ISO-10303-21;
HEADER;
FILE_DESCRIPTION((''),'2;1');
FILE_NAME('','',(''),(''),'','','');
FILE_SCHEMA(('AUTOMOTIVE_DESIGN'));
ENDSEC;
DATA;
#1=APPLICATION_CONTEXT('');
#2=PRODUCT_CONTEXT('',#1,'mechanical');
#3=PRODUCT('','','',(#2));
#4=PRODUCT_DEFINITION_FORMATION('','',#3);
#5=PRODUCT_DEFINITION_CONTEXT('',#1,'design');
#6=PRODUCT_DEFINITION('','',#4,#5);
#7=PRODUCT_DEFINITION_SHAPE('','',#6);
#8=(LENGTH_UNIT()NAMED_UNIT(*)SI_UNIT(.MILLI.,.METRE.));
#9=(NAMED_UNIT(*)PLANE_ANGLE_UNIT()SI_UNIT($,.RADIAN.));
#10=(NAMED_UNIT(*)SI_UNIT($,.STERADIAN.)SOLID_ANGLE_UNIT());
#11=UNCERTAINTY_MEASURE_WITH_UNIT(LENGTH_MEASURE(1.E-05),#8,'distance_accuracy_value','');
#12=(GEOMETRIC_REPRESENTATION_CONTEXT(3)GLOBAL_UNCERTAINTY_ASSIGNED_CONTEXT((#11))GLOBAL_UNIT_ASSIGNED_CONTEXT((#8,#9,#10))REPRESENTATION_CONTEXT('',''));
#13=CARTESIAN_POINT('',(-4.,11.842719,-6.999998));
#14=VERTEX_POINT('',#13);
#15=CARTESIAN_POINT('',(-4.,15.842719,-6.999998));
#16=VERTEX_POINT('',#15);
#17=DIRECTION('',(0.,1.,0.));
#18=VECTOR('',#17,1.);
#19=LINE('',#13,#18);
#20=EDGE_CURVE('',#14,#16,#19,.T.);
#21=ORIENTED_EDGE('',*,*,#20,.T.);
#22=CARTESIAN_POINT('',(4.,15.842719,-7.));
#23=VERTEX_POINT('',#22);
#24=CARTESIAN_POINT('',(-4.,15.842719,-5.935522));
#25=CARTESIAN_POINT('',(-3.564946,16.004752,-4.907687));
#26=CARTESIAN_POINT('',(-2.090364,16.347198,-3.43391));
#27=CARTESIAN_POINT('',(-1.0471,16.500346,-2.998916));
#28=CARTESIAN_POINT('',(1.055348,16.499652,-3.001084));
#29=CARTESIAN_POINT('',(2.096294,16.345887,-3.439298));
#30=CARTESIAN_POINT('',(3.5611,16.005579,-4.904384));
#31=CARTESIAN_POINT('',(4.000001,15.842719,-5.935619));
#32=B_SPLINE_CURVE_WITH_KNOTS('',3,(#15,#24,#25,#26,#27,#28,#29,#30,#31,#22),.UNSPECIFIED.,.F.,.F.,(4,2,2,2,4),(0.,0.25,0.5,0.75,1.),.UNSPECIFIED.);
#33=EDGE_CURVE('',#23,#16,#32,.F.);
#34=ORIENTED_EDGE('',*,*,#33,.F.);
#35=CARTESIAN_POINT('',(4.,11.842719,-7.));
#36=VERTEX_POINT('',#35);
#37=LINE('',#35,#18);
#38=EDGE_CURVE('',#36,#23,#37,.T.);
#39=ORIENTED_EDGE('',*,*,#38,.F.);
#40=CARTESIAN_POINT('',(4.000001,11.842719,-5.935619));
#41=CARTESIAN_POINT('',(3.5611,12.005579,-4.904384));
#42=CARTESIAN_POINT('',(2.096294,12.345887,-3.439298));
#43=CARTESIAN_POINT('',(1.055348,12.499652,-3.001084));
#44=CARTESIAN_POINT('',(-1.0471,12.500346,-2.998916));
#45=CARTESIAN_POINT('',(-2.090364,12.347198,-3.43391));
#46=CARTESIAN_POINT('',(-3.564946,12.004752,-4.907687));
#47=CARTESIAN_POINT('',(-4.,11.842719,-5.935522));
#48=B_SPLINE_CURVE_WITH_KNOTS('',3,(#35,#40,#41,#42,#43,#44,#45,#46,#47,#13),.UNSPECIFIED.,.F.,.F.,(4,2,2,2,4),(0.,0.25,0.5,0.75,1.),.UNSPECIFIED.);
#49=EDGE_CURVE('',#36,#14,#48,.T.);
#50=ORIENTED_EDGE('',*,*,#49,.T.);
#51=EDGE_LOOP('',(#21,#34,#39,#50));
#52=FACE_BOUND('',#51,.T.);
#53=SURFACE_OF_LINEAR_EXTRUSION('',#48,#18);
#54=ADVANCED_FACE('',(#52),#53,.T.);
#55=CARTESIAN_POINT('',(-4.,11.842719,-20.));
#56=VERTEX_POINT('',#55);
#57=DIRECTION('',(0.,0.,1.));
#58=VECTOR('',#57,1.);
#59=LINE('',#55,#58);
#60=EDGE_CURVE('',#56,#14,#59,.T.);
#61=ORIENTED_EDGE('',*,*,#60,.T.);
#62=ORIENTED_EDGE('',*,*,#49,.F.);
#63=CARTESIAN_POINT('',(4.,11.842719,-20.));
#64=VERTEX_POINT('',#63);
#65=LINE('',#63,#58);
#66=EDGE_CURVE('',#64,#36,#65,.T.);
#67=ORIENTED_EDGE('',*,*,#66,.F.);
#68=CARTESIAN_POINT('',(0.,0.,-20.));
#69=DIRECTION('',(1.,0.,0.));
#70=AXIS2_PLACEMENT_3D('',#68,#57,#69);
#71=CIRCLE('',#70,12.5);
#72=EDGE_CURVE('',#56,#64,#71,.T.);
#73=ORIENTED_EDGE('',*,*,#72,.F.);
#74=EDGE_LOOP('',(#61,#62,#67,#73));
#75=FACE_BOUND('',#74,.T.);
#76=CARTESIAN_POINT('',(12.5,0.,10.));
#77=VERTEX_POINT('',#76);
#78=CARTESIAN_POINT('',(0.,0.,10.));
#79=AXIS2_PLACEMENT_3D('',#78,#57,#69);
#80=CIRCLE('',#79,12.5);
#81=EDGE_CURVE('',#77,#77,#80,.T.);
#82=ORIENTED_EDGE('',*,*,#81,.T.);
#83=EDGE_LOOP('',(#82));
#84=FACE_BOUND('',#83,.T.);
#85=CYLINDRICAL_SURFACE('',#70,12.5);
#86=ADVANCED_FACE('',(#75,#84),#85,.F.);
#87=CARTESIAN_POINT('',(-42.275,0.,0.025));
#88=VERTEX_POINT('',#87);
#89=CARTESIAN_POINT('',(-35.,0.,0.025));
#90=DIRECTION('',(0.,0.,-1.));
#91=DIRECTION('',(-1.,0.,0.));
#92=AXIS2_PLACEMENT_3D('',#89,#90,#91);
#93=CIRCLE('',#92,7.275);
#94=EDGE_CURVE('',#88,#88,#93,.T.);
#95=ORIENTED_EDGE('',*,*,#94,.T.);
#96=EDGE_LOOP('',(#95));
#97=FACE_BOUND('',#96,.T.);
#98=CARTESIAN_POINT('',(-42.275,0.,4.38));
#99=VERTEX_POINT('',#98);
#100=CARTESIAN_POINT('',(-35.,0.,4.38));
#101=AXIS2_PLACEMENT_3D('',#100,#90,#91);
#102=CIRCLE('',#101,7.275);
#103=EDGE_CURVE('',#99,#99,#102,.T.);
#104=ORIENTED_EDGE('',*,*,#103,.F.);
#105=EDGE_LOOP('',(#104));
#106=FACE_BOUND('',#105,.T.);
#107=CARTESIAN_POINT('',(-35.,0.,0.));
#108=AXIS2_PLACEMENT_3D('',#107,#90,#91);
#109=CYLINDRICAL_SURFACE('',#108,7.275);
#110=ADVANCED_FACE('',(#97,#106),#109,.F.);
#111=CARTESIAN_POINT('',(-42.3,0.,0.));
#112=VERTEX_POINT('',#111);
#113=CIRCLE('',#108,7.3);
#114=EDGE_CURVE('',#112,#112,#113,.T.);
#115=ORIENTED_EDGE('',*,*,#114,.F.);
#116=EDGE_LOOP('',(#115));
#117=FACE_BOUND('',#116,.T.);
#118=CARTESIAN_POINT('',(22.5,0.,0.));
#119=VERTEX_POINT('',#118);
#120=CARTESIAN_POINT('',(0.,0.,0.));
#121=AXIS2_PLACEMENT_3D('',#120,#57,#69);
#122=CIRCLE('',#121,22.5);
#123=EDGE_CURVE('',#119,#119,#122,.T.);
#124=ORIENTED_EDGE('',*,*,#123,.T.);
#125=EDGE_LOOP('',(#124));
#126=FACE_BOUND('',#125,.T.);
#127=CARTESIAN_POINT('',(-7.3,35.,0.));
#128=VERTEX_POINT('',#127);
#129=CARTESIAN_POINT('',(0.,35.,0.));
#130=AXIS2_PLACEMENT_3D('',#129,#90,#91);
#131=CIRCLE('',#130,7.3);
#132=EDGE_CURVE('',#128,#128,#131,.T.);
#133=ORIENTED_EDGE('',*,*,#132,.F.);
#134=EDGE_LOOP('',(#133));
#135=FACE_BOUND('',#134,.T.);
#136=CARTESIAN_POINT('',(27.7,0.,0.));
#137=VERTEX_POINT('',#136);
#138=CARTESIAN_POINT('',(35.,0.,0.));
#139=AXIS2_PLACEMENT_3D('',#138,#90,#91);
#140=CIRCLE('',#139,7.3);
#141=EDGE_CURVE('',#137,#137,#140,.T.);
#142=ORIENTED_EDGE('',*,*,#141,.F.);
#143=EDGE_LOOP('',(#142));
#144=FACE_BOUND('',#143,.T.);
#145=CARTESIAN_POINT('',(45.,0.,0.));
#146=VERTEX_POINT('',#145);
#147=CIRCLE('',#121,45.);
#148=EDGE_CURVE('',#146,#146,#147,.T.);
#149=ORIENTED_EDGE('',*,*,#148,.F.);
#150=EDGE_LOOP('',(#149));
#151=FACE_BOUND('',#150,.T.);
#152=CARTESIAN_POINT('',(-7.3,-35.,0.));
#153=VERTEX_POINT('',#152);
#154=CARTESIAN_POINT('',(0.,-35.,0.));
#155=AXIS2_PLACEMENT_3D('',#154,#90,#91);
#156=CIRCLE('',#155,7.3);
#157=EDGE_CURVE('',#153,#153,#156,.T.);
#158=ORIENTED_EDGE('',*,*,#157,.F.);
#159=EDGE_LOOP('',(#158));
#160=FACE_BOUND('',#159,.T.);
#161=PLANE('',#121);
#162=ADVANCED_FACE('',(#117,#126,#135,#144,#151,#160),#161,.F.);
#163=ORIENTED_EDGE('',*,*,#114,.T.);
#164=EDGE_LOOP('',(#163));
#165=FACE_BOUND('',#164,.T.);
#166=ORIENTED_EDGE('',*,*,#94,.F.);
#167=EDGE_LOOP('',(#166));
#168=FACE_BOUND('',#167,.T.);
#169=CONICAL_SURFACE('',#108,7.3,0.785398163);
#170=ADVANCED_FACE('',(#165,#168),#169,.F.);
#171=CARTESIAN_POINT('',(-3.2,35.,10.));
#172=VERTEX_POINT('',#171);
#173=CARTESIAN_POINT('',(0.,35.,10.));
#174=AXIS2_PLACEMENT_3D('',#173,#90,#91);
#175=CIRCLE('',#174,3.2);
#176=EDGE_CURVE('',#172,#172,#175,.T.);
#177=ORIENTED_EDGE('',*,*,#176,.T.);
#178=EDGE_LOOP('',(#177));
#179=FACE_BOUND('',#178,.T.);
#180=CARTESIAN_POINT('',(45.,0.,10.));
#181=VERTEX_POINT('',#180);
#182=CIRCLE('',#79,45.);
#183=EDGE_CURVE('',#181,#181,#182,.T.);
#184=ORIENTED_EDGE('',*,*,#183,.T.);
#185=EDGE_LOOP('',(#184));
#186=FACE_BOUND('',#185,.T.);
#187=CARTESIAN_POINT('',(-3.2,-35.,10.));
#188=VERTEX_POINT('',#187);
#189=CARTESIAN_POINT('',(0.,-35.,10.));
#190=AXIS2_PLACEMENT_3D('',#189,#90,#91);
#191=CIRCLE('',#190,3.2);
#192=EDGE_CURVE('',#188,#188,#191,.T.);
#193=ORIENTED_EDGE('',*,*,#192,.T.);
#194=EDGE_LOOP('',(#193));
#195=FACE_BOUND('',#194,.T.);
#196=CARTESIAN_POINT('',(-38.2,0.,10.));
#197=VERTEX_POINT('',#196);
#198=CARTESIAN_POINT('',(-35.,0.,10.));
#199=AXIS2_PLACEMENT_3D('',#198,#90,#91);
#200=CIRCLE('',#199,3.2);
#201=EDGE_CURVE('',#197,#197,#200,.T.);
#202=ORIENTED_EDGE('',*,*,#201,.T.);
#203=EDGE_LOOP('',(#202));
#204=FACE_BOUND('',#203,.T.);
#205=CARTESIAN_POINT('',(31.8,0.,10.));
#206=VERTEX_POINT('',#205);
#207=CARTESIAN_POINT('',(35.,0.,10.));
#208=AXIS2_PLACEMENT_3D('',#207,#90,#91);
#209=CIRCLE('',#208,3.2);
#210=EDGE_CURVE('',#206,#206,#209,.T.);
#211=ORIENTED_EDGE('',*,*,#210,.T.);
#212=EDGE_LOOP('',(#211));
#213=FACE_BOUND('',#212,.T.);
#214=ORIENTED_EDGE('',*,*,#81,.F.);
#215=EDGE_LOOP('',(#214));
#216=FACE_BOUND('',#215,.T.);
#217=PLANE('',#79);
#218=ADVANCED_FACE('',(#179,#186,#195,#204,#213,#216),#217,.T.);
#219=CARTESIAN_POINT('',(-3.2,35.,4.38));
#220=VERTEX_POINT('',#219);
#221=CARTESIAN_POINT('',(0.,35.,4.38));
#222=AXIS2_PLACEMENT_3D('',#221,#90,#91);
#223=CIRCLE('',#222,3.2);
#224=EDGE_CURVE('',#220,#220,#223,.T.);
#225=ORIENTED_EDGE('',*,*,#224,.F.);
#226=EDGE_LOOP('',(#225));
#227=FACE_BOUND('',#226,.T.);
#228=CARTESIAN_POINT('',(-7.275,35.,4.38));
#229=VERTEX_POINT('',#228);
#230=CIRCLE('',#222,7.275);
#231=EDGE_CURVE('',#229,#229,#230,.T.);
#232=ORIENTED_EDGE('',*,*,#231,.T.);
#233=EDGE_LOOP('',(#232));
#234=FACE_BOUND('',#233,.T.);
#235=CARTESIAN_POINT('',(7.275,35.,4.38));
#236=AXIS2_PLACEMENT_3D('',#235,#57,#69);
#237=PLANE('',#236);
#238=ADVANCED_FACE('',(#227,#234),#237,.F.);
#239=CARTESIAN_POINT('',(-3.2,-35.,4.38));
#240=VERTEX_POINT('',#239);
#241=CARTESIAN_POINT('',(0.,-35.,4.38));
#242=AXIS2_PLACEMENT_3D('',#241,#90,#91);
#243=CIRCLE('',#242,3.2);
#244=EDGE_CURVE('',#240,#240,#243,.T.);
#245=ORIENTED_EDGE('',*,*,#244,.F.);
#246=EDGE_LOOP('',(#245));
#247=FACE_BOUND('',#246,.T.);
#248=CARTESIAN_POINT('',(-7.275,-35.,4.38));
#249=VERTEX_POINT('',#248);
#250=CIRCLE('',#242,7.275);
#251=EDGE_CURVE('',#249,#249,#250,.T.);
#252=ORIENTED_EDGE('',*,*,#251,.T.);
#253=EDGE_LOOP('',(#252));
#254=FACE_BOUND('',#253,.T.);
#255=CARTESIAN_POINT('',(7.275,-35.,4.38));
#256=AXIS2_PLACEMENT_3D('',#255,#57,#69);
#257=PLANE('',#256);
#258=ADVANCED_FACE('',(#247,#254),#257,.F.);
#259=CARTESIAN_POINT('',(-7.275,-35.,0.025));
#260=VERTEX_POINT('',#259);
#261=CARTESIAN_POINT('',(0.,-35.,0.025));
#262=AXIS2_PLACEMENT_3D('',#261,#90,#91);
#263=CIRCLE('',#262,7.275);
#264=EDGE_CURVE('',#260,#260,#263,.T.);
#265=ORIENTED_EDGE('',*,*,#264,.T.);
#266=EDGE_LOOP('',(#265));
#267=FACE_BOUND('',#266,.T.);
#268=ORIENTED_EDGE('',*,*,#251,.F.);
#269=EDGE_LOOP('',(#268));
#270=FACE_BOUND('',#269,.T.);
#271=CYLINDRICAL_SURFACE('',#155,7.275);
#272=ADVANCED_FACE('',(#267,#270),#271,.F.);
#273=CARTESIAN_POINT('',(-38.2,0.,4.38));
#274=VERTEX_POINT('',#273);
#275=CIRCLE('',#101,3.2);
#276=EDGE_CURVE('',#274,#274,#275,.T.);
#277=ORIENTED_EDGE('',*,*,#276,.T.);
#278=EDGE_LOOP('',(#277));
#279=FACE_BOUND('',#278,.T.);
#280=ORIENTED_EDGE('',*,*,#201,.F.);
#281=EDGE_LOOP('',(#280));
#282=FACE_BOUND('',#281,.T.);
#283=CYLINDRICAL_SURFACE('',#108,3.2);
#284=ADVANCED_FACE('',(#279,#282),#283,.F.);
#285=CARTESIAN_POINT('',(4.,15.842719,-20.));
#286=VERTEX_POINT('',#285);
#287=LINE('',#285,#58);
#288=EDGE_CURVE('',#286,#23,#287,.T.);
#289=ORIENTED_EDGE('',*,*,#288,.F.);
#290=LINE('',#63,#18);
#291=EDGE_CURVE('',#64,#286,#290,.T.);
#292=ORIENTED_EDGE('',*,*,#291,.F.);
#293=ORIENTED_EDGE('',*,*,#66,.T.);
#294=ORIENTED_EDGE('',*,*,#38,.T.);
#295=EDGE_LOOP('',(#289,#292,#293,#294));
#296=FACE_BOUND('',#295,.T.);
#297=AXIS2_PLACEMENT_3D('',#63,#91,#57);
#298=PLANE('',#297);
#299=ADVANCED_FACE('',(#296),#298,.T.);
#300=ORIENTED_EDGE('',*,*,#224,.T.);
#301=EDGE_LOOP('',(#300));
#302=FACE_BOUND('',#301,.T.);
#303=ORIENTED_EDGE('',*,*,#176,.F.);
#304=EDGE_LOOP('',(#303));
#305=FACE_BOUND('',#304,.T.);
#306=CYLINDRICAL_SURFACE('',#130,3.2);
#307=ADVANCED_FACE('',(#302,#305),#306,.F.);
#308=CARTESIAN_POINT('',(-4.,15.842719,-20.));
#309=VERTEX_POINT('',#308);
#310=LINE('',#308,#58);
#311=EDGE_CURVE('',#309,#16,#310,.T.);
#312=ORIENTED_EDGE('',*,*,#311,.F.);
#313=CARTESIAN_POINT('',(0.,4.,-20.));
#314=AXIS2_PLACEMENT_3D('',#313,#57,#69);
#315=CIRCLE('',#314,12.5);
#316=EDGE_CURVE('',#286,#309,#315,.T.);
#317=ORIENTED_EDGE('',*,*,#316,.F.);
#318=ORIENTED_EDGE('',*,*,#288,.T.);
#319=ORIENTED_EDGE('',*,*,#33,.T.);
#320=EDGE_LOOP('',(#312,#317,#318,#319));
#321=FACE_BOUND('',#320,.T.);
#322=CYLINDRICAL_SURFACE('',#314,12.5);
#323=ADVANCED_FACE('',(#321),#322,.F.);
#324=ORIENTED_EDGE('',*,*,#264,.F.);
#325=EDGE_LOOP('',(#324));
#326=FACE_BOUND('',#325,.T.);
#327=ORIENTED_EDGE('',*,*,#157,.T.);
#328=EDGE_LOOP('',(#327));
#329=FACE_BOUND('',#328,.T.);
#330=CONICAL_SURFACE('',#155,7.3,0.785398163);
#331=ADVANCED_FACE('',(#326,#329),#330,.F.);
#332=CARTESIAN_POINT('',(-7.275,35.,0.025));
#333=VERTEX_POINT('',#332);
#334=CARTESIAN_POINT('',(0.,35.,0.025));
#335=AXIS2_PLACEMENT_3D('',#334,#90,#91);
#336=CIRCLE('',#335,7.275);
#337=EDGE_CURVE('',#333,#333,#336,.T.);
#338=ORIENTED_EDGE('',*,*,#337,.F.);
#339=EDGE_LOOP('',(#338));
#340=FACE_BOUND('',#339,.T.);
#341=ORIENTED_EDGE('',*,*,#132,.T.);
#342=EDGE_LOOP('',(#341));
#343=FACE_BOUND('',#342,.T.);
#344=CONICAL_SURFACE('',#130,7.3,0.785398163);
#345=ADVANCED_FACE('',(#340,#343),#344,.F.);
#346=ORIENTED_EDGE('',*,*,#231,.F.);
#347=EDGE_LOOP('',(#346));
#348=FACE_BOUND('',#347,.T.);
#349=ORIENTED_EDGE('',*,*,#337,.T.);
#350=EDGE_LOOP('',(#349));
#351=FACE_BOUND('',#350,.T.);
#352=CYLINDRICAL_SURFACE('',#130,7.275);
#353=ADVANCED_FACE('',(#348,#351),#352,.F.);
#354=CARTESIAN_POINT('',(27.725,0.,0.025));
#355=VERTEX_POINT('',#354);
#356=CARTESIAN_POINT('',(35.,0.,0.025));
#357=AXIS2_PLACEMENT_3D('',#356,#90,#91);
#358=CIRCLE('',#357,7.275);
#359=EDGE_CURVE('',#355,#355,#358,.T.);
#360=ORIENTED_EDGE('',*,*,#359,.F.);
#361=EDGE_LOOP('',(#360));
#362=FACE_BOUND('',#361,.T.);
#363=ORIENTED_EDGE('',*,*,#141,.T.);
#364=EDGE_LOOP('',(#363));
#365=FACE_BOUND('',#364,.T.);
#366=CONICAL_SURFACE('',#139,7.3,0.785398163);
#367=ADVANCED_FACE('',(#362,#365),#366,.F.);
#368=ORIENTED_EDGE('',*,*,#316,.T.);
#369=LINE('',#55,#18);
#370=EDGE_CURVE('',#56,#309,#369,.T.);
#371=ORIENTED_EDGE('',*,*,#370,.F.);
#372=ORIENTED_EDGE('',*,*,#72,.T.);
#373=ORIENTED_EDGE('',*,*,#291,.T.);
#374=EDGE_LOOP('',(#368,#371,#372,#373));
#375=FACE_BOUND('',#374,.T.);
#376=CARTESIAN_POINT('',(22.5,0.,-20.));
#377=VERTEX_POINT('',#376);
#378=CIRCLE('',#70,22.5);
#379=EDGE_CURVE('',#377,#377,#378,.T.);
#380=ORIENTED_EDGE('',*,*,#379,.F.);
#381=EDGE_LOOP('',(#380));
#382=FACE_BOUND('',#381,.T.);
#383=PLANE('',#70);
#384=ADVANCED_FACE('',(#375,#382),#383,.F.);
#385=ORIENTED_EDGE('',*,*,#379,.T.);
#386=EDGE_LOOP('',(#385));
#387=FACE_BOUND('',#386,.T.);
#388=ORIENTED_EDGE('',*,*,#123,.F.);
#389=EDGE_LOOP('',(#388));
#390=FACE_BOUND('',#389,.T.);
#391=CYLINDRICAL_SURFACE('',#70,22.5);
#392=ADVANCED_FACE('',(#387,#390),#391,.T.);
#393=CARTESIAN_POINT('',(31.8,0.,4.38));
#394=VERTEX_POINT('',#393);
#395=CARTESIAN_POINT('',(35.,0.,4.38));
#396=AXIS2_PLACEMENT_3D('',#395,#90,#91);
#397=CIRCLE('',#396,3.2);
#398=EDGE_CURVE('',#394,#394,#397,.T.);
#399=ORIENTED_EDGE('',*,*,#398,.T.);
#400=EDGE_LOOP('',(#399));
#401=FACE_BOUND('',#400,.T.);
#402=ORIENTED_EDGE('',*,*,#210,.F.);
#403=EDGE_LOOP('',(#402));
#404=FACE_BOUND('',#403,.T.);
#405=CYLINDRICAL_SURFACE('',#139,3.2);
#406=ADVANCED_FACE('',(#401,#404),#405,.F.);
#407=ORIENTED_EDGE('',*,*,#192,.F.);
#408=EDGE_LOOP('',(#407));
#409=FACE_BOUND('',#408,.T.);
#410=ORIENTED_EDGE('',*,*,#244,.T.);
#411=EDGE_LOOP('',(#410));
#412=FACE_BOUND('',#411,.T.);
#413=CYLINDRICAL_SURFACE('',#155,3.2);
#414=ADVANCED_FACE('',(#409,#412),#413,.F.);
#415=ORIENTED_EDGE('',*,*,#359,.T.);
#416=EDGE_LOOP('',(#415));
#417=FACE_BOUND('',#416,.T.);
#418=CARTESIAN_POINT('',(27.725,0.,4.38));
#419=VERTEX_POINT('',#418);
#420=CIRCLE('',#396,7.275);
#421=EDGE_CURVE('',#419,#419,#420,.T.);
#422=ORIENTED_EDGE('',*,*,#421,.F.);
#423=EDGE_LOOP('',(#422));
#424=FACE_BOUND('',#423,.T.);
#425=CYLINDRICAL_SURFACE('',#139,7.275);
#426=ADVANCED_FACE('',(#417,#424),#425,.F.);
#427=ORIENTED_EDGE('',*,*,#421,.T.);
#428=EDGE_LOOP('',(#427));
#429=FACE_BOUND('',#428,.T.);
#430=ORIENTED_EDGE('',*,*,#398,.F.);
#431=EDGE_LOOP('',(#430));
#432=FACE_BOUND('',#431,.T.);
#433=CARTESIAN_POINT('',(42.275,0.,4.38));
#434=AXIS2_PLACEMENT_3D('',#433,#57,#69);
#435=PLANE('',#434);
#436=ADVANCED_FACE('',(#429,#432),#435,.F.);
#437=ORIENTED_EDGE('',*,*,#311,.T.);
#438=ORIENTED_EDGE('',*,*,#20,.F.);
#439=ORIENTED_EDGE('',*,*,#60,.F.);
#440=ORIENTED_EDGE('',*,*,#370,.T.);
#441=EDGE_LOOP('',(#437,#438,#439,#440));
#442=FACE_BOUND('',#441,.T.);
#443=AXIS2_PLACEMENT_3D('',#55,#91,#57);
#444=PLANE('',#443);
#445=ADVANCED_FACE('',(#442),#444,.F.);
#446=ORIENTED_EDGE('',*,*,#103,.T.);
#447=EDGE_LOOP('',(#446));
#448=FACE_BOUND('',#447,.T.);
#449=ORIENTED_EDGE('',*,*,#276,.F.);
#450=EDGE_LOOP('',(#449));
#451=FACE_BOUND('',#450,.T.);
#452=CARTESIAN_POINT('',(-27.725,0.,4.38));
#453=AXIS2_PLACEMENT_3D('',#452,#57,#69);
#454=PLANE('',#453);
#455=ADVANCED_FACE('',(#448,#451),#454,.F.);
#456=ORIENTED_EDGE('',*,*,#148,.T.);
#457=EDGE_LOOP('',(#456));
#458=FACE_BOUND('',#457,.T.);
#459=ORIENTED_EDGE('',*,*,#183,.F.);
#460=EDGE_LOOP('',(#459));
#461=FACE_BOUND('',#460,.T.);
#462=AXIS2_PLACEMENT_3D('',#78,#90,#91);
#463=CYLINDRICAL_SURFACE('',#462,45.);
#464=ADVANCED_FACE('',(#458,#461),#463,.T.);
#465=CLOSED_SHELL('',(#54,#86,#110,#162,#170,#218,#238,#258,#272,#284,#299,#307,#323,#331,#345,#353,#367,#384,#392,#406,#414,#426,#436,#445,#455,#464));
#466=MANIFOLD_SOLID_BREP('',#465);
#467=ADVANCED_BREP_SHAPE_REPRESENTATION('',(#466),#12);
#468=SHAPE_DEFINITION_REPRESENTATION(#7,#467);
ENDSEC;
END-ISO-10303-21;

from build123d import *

# Parameters (mm, degrees)
SKETCH1_R                              = 22.5
SKETCH1_R_2                            = 12.5
BOSS_EXTRUDE1_DEPTH                    = 20
BOSS_EXTRUDE2_START                    = 10
SKETCH2_R                              = 45
SKETCH2_R_2                            = 12.5
BOSS_EXTRUDE2_DEPTH                    = 10
CUT_EXTRUDE1_START                     = 11
CUT_EXTRUDE1_DEPTH                     = 4.842719182
CUT_EXTRUDE1_START_2                   = -21
CUT_EXTRUDE1_2_DEPTH                   = 18.000002419
CUT_EXTRUDE1_START_3                   = 15.842719282
CUT_EXTRUDE1_3_DEPTH                   = 1.157280718
CBORE_FOR_M6_HEX_HEAD_BOLT1_AT_2_COUNT = 2
CBORE_FOR_M6_HEX_HEAD_BOLT1_AT_2_PITCH = 49.497474683
CBORE_FOR_M6_HEX_HEAD_BOLT1_AT_3_COUNT = 2
CBORE_FOR_M6_HEX_HEAD_BOLT1_AT_3_PITCH = 70
CBORE_FOR_M6_HEX_HEAD_BOLT1_AT_4_COUNT = 2
CBORE_FOR_M6_HEX_HEAD_BOLT1_AT_4_PITCH = 49.497474683


with BuildPart() as part:
    # Sketch1 → Boss-Extrude1 (new body)
    with BuildSketch(Plane.XY):
        Circle(SKETCH1_R)
        Circle(SKETCH1_R_2, mode=Mode.SUBTRACT)
    extrude(amount=-BOSS_EXTRUDE1_DEPTH)

    # Sketch2 → Boss-Extrude2 (add)
    with BuildSketch(Plane.XY.offset(BOSS_EXTRUDE2_START)):
        Circle(SKETCH2_R)
        Circle(SKETCH2_R_2, mode=Mode.SUBTRACT)
    extrude(amount=-BOSS_EXTRUDE2_DEPTH)

    # Cut-Extrude1: read off the stored shape, not the designer's step
    # Cut-Extrude1 outline → Cut-Extrude1 (cut)
    with BuildSketch(Plane(origin=(0, 0, 0), x_dir=(1, 0, 0), z_dir=(0, 1, 0)).offset(CUT_EXTRUDE1_START)):
        with BuildLine():
            add(Edge.make_bspline(
                [(4, 7), (4.000000645, 5.935618893), (3.56110042, 4.904383726), (2.096294231, 3.439297629), (1.055347946, 3.001083541), (-1.047099738, 2.998915861), (-2.090363581, 3.433909578), (-3.564946099, 4.907687175), (-4, 5.935522054), (-4, 6.999997575)],
                knots=[0, 0, 0, 0, 0.25, 0.25, 0.5, 0.5, 0.75, 0.75, 1, 1, 1, 1], degree=3))
            Line((4, 7), (4, 20))
            Line((4, 20), (-4, 20))
            Line((-4, 20), (-4, 6.999997575))
        make_face()
    extrude(amount=CUT_EXTRUDE1_DEPTH, mode=Mode.SUBTRACT)

    # Cut-Extrude1 2 outline → Cut-Extrude1 2 (cut)
    with BuildSketch(Plane.XY.offset(CUT_EXTRUDE1_START_2)):
        with BuildLine():
            Line((-4, 15.842719282), (4, 15.842719282))
            ThreePointArc((4, 15.842719282), (0, 16.5), (-4, 15.842719282))
        make_face()
    extrude(amount=CUT_EXTRUDE1_2_DEPTH, mode=Mode.SUBTRACT)

    # Cut-Extrude1 3 outline → Cut-Extrude1 3 (add)
    with BuildSketch(Plane(origin=(0, 0, 0), x_dir=(1, 0, 0), z_dir=(0, 1, 0)).offset(CUT_EXTRUDE1_START_3)):
        with BuildLine():
            Line((-4, 2.999997581), (0.000204294, 2.999997681))
            add(Edge.make_bspline(
                [(0.000204294, 2.999997681), (-1.049692709, 2.999997676), (-2.091279995, 3.434825492), (-3.564946099, 4.907687175), (-4, 5.935522054), (-4, 6.999997575)],
                knots=[0.500310737, 0.500310737, 0.500310737, 0.500310737, 0.75, 0.75, 1, 1, 1, 1], degree=3))
            Line((-4, 6.999997575), (-4, 2.999997581))
        make_face()
        with BuildLine():
            add(Edge.make_bspline(
                [(4, 7), (4.000000645, 5.935618893), (3.56110042, 4.904383726), (2.096294231, 3.439297629), (1.055347946, 3.001083541), (0.002817488, 2.999998354), (0.001510885, 2.999997681), (0.000204294, 2.999997681)],
                knots=[0, 0, 0, 0, 0.25, 0.25, 0.5, 0.5, 0.500310737, 0.500310737, 0.500310737, 0.500310737], degree=3))
            Line((0.000204294, 2.999997681), (4, 2.999997581))
            Line((4, 2.999997581), (4, 7))
        make_face()
    extrude(amount=CUT_EXTRUDE1_3_DEPTH)

    # Sketch5 → CBORE for M6 Hex Head Bolt1 (revolve, cut)
    with BuildSketch(Plane.YZ.offset(35)):
        Polygon((0, 0), (0, 10), (3.2, 10), (3.2, 4.38), (7.275, 4.38), (7.275, 0.025), (7.3, 0), align=None)
    cbore_for_m6_hex_head_bolt1 = revolve(axis=Axis((35, 0, -6.35), (0, 0, 1)), mode=Mode.SUBTRACT)

    # CBORE for M6 Hex Head Bolt1 at 2: CBORE for M6 Hex Head Bolt1 ×2
    with Locations(*[Vector(-0.7071067811865277, 0.7071067811865673, 0) * (i * CBORE_FOR_M6_HEX_HEAD_BOLT1_AT_2_PITCH) for i in range(1, CBORE_FOR_M6_HEX_HEAD_BOLT1_AT_2_COUNT)]):
        add(cbore_for_m6_hex_head_bolt1, mode=Mode.SUBTRACT)

    # CBORE for M6 Hex Head Bolt1 at 3: CBORE for M6 Hex Head Bolt1 ×2
    with Locations(*[(-i * CBORE_FOR_M6_HEX_HEAD_BOLT1_AT_3_PITCH, 0, 0) for i in range(1, CBORE_FOR_M6_HEX_HEAD_BOLT1_AT_3_COUNT)]):
        add(cbore_for_m6_hex_head_bolt1, mode=Mode.SUBTRACT)

    # CBORE for M6 Hex Head Bolt1 at 4: CBORE for M6 Hex Head Bolt1 ×2
    with Locations(*[Vector(-0.7071067811865674, -0.7071067811865276, 0) * (i * CBORE_FOR_M6_HEX_HEAD_BOLT1_AT_4_PITCH) for i in range(1, CBORE_FOR_M6_HEX_HEAD_BOLT1_AT_4_COUNT)]):
        add(cbore_for_m6_hex_head_bolt1, mode=Mode.SUBTRACT)


solid = part.part
